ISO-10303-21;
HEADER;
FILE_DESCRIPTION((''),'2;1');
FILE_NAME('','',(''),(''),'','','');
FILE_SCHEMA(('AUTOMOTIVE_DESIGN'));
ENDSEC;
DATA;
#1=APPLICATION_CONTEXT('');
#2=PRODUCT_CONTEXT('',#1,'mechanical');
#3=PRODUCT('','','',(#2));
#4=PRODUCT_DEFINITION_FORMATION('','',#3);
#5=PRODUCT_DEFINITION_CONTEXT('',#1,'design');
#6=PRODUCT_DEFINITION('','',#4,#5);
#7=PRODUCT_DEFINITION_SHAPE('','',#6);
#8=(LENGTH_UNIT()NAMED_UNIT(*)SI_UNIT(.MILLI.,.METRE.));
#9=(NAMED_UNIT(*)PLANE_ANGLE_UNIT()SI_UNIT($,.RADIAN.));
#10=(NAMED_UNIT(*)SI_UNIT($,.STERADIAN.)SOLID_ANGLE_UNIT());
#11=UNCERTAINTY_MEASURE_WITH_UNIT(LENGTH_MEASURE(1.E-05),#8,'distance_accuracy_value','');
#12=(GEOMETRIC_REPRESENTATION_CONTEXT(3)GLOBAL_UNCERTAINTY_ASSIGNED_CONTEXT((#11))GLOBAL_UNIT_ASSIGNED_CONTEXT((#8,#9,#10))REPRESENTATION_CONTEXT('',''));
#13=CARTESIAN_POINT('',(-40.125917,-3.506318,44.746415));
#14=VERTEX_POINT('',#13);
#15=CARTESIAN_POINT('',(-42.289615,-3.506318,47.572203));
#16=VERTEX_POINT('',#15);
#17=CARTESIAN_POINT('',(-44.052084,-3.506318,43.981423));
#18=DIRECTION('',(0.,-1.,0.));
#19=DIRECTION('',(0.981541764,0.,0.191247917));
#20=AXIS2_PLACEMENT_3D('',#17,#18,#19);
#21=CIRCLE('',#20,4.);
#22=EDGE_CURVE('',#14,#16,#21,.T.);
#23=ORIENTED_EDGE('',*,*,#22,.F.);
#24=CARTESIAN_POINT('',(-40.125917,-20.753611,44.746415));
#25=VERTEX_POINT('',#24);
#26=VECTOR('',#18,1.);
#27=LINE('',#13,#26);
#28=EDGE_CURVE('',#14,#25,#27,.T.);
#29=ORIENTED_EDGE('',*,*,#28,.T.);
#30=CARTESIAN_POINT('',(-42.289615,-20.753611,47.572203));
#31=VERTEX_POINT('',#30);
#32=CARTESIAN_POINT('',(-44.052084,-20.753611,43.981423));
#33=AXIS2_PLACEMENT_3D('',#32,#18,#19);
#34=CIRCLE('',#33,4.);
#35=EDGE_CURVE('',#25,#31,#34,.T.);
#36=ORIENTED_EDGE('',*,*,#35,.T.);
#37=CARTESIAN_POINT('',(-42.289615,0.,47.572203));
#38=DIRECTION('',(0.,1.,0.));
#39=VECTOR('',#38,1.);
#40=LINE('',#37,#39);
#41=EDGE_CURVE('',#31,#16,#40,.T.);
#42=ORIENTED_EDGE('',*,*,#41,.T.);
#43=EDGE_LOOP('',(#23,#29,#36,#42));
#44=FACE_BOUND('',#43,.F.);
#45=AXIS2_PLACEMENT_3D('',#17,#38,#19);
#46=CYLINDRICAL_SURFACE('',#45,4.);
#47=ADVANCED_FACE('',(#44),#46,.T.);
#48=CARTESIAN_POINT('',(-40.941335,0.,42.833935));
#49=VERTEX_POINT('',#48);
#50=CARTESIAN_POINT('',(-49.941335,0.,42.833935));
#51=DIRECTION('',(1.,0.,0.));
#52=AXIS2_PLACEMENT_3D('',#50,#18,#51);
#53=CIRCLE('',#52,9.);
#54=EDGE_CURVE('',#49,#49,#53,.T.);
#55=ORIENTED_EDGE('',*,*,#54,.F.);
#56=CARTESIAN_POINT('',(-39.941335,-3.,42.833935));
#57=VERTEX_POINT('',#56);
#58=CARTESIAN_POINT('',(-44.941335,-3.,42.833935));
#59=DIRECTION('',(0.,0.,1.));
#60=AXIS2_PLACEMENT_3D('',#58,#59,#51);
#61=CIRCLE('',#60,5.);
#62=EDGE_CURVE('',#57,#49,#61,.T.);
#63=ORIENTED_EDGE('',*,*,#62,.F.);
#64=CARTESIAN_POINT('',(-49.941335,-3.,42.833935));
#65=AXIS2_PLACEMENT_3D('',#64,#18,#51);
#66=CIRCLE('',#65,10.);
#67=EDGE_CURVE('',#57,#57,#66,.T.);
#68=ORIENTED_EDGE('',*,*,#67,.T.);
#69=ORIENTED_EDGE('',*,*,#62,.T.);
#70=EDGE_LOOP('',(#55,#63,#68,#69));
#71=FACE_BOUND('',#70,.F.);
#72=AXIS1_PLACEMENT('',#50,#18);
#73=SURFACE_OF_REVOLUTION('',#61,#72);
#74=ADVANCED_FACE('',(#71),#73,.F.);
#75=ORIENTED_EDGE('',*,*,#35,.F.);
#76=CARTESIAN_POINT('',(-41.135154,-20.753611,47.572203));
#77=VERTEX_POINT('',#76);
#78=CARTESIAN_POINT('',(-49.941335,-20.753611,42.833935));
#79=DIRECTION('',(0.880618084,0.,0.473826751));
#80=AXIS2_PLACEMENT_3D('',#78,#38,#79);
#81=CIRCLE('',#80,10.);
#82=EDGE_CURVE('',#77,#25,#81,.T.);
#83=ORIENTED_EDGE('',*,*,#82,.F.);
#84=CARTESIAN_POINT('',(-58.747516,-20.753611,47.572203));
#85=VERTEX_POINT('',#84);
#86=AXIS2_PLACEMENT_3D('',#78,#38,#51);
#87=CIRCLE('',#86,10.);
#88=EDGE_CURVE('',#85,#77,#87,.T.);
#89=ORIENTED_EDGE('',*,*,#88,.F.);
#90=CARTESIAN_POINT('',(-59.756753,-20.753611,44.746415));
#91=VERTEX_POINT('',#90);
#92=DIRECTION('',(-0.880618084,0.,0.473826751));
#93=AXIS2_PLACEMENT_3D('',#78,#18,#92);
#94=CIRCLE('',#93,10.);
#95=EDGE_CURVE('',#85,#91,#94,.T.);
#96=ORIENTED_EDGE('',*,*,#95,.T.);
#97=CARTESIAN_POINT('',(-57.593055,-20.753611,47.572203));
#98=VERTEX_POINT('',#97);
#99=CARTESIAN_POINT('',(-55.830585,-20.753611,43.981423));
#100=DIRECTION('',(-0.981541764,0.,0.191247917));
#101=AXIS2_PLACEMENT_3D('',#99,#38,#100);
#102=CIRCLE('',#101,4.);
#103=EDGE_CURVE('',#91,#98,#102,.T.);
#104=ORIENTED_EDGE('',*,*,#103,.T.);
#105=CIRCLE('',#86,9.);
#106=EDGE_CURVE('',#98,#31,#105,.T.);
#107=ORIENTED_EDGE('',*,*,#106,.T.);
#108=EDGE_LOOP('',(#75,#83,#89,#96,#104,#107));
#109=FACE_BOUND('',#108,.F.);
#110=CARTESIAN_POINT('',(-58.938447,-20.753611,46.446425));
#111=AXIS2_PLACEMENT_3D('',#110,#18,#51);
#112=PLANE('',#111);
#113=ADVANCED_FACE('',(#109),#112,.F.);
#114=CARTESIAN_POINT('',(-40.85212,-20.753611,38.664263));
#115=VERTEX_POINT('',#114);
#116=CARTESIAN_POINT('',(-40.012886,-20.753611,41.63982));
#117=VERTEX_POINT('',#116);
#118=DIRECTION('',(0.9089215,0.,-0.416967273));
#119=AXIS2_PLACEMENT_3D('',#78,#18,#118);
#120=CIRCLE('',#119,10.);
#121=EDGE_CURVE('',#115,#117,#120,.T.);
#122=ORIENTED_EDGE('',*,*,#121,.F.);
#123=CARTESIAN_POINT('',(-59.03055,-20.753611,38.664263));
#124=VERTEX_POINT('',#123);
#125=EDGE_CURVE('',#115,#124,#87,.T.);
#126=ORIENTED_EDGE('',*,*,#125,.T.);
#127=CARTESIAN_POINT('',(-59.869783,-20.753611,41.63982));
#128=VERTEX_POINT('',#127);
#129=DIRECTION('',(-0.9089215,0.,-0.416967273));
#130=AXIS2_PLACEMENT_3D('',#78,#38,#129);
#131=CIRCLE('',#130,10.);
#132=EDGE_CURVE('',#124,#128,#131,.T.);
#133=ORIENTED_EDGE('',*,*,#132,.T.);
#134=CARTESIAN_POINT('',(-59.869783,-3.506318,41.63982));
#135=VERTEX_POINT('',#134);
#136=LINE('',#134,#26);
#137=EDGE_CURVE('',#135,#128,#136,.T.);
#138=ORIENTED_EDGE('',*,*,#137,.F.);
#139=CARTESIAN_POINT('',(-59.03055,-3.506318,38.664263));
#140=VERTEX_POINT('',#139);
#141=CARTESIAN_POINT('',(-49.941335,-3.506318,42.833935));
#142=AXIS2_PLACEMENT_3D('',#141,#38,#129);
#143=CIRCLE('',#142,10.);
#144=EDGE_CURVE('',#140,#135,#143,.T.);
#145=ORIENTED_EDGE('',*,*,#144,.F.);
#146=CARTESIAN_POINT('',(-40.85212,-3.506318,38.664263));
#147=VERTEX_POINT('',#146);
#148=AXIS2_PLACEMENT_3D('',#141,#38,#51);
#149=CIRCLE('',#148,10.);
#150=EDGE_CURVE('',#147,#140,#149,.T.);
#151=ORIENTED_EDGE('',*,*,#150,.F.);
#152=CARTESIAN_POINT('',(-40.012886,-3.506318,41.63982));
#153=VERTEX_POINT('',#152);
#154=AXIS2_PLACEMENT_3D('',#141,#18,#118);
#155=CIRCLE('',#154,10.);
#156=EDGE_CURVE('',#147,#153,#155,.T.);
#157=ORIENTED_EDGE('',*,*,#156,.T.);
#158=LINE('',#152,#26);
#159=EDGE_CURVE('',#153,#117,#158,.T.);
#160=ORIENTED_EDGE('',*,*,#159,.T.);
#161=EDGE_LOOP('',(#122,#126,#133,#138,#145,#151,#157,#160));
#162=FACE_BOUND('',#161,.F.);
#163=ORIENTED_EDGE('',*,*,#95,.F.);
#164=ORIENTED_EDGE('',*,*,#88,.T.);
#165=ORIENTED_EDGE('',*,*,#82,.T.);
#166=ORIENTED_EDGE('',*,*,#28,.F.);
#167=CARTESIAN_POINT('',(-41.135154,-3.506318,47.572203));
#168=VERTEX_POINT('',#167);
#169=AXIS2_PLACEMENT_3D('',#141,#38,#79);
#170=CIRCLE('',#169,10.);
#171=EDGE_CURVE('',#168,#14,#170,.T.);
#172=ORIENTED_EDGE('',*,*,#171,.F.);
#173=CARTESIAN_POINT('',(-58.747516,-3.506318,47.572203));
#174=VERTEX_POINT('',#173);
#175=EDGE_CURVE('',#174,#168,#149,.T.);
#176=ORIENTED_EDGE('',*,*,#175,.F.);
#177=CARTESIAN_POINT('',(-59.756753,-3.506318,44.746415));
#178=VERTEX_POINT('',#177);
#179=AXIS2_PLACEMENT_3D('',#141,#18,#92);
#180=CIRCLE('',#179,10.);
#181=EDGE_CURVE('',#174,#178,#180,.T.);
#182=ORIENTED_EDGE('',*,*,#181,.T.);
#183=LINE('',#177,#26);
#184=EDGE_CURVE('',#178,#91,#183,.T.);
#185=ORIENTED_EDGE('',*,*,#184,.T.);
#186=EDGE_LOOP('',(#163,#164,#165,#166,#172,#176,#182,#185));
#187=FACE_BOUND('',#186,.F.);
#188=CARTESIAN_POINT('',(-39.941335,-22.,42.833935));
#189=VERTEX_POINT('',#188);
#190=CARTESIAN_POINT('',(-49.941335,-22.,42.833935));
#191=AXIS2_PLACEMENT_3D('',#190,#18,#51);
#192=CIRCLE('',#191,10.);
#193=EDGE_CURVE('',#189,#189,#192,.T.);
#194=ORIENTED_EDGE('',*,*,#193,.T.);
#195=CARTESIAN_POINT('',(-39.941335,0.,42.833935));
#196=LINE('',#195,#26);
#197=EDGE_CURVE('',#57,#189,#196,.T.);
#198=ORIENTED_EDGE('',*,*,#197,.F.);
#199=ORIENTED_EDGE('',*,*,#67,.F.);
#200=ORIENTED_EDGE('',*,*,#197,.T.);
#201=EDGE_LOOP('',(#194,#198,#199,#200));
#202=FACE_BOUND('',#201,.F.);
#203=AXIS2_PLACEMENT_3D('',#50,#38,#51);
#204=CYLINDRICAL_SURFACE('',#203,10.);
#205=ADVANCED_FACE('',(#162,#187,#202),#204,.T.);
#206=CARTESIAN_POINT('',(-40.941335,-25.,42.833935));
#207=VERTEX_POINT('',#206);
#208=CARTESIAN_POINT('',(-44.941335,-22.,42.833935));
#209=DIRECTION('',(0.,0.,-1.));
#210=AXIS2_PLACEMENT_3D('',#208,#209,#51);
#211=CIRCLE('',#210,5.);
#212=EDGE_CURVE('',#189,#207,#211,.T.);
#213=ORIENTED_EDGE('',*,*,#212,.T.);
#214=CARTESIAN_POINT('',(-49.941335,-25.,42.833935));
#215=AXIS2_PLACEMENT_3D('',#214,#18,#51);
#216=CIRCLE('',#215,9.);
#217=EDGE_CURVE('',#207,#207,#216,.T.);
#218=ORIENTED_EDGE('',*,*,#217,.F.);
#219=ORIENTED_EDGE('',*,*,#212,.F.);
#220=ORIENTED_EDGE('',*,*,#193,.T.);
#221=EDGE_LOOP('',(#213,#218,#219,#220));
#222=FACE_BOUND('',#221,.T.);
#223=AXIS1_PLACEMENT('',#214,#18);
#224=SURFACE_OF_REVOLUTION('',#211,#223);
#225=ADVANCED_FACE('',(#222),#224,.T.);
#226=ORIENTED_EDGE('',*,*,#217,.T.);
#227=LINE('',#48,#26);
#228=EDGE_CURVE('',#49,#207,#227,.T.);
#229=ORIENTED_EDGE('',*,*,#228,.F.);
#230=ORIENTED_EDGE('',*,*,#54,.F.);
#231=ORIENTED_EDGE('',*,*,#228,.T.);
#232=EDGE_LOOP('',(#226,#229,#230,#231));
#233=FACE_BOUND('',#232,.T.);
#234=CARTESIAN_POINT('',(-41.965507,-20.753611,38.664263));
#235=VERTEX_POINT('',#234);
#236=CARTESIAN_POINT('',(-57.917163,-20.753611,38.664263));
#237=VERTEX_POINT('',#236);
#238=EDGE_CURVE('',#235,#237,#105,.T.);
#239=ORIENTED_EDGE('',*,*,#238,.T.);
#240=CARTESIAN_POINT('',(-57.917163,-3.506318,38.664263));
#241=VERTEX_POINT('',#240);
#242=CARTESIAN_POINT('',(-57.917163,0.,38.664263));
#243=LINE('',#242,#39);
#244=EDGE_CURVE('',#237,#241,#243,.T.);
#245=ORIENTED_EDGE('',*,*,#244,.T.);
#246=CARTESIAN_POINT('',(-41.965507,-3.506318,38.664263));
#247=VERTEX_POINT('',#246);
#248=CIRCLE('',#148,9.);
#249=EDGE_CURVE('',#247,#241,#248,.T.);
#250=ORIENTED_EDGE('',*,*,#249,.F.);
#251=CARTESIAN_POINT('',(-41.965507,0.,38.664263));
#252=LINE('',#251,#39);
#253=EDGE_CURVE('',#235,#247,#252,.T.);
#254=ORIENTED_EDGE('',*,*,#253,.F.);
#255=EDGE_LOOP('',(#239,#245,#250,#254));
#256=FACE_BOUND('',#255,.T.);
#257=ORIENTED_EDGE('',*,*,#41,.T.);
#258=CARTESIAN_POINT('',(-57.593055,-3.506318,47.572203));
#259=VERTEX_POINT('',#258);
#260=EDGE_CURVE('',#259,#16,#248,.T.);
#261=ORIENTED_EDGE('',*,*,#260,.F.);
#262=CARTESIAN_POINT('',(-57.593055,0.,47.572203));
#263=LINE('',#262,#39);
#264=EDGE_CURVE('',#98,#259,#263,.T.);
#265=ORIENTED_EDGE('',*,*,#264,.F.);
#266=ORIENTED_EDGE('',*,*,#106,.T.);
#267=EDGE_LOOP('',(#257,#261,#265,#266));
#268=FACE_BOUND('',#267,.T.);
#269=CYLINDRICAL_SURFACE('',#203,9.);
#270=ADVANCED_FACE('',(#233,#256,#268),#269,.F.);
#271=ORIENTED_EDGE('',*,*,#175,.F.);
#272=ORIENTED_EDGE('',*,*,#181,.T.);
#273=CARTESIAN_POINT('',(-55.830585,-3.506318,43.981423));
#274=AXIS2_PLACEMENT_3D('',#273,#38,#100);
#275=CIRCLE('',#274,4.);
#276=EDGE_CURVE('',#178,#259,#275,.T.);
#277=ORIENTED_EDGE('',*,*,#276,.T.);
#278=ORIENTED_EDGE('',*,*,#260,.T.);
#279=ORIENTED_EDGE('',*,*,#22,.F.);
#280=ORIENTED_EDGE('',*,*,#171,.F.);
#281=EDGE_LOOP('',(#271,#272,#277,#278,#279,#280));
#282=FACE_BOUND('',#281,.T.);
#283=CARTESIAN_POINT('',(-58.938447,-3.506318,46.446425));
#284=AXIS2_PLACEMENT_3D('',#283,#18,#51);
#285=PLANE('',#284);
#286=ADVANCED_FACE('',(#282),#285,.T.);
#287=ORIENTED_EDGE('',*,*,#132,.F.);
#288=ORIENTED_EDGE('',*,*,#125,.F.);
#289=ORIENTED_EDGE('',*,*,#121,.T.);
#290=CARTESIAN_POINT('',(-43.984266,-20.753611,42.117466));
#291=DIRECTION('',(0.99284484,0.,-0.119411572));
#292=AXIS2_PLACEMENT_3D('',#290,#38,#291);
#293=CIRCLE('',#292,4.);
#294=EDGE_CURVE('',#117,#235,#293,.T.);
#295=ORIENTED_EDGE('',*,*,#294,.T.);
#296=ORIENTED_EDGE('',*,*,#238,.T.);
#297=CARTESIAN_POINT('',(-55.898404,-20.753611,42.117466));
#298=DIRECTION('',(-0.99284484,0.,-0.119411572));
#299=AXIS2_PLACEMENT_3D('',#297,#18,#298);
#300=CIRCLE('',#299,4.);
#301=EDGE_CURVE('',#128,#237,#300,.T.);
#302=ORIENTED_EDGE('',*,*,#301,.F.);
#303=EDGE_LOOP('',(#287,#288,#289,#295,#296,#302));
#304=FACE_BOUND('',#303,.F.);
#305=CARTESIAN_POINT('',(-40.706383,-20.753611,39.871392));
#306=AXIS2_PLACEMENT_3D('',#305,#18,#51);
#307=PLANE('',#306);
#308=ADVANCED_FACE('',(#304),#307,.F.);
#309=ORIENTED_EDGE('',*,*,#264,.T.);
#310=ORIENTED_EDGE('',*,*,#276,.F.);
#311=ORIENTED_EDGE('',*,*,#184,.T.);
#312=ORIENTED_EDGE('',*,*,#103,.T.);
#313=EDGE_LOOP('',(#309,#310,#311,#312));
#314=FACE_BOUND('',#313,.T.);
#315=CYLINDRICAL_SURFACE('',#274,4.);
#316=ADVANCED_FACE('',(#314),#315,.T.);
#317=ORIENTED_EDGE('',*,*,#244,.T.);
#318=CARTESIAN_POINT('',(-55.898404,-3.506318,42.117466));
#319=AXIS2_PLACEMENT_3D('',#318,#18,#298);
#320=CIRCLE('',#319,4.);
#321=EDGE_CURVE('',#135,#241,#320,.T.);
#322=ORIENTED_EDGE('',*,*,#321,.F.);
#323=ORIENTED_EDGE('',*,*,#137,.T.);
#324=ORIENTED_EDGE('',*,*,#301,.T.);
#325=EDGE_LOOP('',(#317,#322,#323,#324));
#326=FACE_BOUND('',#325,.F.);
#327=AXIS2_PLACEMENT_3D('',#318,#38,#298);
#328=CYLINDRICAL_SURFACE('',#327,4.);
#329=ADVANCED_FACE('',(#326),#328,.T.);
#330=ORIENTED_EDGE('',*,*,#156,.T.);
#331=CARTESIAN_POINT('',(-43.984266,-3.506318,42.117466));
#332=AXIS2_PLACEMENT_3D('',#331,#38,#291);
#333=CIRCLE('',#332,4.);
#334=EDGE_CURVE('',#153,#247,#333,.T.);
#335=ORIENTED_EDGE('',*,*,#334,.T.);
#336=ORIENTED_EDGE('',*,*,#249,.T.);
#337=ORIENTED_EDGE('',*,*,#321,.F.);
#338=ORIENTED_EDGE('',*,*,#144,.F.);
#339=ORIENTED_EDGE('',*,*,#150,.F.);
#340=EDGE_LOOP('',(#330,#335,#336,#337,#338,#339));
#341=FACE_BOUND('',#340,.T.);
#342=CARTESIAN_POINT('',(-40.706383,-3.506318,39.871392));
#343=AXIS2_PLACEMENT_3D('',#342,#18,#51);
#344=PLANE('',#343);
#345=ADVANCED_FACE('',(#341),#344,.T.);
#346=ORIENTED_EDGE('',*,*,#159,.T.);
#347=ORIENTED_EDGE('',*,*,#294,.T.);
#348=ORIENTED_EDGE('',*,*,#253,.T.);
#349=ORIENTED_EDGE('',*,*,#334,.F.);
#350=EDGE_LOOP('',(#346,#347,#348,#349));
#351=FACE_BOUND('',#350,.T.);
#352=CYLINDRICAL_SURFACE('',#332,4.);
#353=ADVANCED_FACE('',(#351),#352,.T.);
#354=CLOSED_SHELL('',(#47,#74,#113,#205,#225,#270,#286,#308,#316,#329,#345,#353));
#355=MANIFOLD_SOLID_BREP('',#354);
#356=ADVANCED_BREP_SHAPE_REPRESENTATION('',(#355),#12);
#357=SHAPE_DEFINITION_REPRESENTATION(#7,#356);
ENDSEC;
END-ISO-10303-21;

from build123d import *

# Parameters (mm, degrees)
F0_R        = 10
F0_R_2      = 9
F1_DEPTH    = 25
F2_W        = 17.247292446
F2_H        = 6.4440444112
F2_H_2      = 8.7184142321
F3_DEPTH    = 200
F5_T1_DEPTH = 17.247292446


# Not quite as in the source:
# - a fillet or chamfer that OpenCascade refuses, or shapes differently, is made with other operations: its cross-section is extruded or revolved along the edge and cut away or added


with BuildPart() as f1:
    # F0 (on Front) → F1 (new body)
    with BuildSketch(Plane.XZ):
        with Locations((-49.9413348734, 42.8339354694)):
            Circle(F0_R)
        with Locations((-49.9413348734, 42.8339354694)):
            Circle(F0_R_2, mode=Mode.SUBTRACT)
    extrude(amount=F1_DEPTH)

    # F2 (on Right) → F3 (cut)
    with BuildSketch(Plane.YZ):
        with Locations((-12.1299646562, 50.7942251861)):
            Rectangle(F2_W, F2_H)
        with Locations((-12.1299646562, 34.3050556257)):
            Rectangle(F2_W, F2_H_2)
    extrude(amount=-F3_DEPTH, mode=Mode.SUBTRACT)

    # F4: fillet of radius 5 on 2 edges, made by hand

    # F4_s1 → F4_t2 (revolve, cut)
    with BuildSketch(Plane.XY.offset(42.8339354694)):
        with BuildLine():
            ThreePointArc((-39.9413348734, -22), (-40.1979183832, -23.5811388301), (-40.9413348734, -25))
            Line((-40.9413348734, -25), (-39.9413348734, -25))
            Line((-39.9413348734, -25), (-39.9413348734, -22))
        make_face()
    revolve(axis=Axis((-49.9413348734, -25, 42.8339354694), (0, -1, 0)), mode=Mode.SUBTRACT)

    # F4_s3 → F4_t4 (revolve, cut)
    with BuildSketch(Plane.XY.offset(42.8339354694)):
        with BuildLine():
            ThreePointArc((-39.9413348734, -3), (-40.1979183832, -1.4188611699), (-40.9413348734, 0))
            Line((-40.9413348734, 0), (-39.9413348734, 0))
            Line((-39.9413348734, 0), (-39.9413348734, -3))
        make_face()
    revolve(axis=Axis((-49.9413348734, 0, 42.8339354694), (0, -1, 0)), mode=Mode.SUBTRACT)

    # F5: fillet of radius 4 on 4 edges, made by hand

    # F5_s2 → F5_t1 (cut)
    with BuildSketch(Plane.XZ.offset(3.5063184332)):
        with BuildLine():
            ThreePointArc((-59.7567525129, 44.7464146362), (-59.0064973809, 46.4132090316), (-57.5930550064, 47.5722029805))
            Line((-57.5930550064, 47.5722029805), (-58.7475157138, 47.5722029805))
            ThreePointArc((-58.7475157138, 47.5722029805), (-59.3587258299, 46.1973782848), (-59.7567525129, 44.7464146362))
        make_face()
        with BuildLine():
            ThreePointArc((-40.125917234, 44.7464146362), (-40.876172366, 46.4132090316), (-42.2896147405, 47.5722029805))
            Line((-42.2896147405, 47.5722029805), (-41.1351540331, 47.5722029805))
            ThreePointArc((-41.1351540331, 47.5722029805), (-40.5239439169, 46.1973782848), (-40.125917234, 44.7464146362))
        make_face()
        with BuildLine():
            ThreePointArc((-40.0128864724, 41.6398197512), (-40.6400284609, 39.9229099557), (-41.9655070578, 38.6642627418))
            Line((-41.9655070578, 38.6642627418), (-40.8521198719, 38.6642627418))
            ThreePointArc((-40.8521198719, 38.6642627418), (-40.3168159139, 40.1194125284), (-40.0128864724, 41.6398197512))
        make_face()
        with BuildLine():
            ThreePointArc((-59.8697832745, 41.6398197512), (-59.2426412859, 39.9229099557), (-57.9171626891, 38.6642627418))
            Line((-57.9171626891, 38.6642627418), (-59.030549875, 38.6642627418))
            ThreePointArc((-59.030549875, 38.6642627418), (-59.565853833, 40.1194125284), (-59.8697832745, 41.6398197512))
        make_face()
    extrude(amount=F5_T1_DEPTH, mode=Mode.SUBTRACT)


solid = f1.part
